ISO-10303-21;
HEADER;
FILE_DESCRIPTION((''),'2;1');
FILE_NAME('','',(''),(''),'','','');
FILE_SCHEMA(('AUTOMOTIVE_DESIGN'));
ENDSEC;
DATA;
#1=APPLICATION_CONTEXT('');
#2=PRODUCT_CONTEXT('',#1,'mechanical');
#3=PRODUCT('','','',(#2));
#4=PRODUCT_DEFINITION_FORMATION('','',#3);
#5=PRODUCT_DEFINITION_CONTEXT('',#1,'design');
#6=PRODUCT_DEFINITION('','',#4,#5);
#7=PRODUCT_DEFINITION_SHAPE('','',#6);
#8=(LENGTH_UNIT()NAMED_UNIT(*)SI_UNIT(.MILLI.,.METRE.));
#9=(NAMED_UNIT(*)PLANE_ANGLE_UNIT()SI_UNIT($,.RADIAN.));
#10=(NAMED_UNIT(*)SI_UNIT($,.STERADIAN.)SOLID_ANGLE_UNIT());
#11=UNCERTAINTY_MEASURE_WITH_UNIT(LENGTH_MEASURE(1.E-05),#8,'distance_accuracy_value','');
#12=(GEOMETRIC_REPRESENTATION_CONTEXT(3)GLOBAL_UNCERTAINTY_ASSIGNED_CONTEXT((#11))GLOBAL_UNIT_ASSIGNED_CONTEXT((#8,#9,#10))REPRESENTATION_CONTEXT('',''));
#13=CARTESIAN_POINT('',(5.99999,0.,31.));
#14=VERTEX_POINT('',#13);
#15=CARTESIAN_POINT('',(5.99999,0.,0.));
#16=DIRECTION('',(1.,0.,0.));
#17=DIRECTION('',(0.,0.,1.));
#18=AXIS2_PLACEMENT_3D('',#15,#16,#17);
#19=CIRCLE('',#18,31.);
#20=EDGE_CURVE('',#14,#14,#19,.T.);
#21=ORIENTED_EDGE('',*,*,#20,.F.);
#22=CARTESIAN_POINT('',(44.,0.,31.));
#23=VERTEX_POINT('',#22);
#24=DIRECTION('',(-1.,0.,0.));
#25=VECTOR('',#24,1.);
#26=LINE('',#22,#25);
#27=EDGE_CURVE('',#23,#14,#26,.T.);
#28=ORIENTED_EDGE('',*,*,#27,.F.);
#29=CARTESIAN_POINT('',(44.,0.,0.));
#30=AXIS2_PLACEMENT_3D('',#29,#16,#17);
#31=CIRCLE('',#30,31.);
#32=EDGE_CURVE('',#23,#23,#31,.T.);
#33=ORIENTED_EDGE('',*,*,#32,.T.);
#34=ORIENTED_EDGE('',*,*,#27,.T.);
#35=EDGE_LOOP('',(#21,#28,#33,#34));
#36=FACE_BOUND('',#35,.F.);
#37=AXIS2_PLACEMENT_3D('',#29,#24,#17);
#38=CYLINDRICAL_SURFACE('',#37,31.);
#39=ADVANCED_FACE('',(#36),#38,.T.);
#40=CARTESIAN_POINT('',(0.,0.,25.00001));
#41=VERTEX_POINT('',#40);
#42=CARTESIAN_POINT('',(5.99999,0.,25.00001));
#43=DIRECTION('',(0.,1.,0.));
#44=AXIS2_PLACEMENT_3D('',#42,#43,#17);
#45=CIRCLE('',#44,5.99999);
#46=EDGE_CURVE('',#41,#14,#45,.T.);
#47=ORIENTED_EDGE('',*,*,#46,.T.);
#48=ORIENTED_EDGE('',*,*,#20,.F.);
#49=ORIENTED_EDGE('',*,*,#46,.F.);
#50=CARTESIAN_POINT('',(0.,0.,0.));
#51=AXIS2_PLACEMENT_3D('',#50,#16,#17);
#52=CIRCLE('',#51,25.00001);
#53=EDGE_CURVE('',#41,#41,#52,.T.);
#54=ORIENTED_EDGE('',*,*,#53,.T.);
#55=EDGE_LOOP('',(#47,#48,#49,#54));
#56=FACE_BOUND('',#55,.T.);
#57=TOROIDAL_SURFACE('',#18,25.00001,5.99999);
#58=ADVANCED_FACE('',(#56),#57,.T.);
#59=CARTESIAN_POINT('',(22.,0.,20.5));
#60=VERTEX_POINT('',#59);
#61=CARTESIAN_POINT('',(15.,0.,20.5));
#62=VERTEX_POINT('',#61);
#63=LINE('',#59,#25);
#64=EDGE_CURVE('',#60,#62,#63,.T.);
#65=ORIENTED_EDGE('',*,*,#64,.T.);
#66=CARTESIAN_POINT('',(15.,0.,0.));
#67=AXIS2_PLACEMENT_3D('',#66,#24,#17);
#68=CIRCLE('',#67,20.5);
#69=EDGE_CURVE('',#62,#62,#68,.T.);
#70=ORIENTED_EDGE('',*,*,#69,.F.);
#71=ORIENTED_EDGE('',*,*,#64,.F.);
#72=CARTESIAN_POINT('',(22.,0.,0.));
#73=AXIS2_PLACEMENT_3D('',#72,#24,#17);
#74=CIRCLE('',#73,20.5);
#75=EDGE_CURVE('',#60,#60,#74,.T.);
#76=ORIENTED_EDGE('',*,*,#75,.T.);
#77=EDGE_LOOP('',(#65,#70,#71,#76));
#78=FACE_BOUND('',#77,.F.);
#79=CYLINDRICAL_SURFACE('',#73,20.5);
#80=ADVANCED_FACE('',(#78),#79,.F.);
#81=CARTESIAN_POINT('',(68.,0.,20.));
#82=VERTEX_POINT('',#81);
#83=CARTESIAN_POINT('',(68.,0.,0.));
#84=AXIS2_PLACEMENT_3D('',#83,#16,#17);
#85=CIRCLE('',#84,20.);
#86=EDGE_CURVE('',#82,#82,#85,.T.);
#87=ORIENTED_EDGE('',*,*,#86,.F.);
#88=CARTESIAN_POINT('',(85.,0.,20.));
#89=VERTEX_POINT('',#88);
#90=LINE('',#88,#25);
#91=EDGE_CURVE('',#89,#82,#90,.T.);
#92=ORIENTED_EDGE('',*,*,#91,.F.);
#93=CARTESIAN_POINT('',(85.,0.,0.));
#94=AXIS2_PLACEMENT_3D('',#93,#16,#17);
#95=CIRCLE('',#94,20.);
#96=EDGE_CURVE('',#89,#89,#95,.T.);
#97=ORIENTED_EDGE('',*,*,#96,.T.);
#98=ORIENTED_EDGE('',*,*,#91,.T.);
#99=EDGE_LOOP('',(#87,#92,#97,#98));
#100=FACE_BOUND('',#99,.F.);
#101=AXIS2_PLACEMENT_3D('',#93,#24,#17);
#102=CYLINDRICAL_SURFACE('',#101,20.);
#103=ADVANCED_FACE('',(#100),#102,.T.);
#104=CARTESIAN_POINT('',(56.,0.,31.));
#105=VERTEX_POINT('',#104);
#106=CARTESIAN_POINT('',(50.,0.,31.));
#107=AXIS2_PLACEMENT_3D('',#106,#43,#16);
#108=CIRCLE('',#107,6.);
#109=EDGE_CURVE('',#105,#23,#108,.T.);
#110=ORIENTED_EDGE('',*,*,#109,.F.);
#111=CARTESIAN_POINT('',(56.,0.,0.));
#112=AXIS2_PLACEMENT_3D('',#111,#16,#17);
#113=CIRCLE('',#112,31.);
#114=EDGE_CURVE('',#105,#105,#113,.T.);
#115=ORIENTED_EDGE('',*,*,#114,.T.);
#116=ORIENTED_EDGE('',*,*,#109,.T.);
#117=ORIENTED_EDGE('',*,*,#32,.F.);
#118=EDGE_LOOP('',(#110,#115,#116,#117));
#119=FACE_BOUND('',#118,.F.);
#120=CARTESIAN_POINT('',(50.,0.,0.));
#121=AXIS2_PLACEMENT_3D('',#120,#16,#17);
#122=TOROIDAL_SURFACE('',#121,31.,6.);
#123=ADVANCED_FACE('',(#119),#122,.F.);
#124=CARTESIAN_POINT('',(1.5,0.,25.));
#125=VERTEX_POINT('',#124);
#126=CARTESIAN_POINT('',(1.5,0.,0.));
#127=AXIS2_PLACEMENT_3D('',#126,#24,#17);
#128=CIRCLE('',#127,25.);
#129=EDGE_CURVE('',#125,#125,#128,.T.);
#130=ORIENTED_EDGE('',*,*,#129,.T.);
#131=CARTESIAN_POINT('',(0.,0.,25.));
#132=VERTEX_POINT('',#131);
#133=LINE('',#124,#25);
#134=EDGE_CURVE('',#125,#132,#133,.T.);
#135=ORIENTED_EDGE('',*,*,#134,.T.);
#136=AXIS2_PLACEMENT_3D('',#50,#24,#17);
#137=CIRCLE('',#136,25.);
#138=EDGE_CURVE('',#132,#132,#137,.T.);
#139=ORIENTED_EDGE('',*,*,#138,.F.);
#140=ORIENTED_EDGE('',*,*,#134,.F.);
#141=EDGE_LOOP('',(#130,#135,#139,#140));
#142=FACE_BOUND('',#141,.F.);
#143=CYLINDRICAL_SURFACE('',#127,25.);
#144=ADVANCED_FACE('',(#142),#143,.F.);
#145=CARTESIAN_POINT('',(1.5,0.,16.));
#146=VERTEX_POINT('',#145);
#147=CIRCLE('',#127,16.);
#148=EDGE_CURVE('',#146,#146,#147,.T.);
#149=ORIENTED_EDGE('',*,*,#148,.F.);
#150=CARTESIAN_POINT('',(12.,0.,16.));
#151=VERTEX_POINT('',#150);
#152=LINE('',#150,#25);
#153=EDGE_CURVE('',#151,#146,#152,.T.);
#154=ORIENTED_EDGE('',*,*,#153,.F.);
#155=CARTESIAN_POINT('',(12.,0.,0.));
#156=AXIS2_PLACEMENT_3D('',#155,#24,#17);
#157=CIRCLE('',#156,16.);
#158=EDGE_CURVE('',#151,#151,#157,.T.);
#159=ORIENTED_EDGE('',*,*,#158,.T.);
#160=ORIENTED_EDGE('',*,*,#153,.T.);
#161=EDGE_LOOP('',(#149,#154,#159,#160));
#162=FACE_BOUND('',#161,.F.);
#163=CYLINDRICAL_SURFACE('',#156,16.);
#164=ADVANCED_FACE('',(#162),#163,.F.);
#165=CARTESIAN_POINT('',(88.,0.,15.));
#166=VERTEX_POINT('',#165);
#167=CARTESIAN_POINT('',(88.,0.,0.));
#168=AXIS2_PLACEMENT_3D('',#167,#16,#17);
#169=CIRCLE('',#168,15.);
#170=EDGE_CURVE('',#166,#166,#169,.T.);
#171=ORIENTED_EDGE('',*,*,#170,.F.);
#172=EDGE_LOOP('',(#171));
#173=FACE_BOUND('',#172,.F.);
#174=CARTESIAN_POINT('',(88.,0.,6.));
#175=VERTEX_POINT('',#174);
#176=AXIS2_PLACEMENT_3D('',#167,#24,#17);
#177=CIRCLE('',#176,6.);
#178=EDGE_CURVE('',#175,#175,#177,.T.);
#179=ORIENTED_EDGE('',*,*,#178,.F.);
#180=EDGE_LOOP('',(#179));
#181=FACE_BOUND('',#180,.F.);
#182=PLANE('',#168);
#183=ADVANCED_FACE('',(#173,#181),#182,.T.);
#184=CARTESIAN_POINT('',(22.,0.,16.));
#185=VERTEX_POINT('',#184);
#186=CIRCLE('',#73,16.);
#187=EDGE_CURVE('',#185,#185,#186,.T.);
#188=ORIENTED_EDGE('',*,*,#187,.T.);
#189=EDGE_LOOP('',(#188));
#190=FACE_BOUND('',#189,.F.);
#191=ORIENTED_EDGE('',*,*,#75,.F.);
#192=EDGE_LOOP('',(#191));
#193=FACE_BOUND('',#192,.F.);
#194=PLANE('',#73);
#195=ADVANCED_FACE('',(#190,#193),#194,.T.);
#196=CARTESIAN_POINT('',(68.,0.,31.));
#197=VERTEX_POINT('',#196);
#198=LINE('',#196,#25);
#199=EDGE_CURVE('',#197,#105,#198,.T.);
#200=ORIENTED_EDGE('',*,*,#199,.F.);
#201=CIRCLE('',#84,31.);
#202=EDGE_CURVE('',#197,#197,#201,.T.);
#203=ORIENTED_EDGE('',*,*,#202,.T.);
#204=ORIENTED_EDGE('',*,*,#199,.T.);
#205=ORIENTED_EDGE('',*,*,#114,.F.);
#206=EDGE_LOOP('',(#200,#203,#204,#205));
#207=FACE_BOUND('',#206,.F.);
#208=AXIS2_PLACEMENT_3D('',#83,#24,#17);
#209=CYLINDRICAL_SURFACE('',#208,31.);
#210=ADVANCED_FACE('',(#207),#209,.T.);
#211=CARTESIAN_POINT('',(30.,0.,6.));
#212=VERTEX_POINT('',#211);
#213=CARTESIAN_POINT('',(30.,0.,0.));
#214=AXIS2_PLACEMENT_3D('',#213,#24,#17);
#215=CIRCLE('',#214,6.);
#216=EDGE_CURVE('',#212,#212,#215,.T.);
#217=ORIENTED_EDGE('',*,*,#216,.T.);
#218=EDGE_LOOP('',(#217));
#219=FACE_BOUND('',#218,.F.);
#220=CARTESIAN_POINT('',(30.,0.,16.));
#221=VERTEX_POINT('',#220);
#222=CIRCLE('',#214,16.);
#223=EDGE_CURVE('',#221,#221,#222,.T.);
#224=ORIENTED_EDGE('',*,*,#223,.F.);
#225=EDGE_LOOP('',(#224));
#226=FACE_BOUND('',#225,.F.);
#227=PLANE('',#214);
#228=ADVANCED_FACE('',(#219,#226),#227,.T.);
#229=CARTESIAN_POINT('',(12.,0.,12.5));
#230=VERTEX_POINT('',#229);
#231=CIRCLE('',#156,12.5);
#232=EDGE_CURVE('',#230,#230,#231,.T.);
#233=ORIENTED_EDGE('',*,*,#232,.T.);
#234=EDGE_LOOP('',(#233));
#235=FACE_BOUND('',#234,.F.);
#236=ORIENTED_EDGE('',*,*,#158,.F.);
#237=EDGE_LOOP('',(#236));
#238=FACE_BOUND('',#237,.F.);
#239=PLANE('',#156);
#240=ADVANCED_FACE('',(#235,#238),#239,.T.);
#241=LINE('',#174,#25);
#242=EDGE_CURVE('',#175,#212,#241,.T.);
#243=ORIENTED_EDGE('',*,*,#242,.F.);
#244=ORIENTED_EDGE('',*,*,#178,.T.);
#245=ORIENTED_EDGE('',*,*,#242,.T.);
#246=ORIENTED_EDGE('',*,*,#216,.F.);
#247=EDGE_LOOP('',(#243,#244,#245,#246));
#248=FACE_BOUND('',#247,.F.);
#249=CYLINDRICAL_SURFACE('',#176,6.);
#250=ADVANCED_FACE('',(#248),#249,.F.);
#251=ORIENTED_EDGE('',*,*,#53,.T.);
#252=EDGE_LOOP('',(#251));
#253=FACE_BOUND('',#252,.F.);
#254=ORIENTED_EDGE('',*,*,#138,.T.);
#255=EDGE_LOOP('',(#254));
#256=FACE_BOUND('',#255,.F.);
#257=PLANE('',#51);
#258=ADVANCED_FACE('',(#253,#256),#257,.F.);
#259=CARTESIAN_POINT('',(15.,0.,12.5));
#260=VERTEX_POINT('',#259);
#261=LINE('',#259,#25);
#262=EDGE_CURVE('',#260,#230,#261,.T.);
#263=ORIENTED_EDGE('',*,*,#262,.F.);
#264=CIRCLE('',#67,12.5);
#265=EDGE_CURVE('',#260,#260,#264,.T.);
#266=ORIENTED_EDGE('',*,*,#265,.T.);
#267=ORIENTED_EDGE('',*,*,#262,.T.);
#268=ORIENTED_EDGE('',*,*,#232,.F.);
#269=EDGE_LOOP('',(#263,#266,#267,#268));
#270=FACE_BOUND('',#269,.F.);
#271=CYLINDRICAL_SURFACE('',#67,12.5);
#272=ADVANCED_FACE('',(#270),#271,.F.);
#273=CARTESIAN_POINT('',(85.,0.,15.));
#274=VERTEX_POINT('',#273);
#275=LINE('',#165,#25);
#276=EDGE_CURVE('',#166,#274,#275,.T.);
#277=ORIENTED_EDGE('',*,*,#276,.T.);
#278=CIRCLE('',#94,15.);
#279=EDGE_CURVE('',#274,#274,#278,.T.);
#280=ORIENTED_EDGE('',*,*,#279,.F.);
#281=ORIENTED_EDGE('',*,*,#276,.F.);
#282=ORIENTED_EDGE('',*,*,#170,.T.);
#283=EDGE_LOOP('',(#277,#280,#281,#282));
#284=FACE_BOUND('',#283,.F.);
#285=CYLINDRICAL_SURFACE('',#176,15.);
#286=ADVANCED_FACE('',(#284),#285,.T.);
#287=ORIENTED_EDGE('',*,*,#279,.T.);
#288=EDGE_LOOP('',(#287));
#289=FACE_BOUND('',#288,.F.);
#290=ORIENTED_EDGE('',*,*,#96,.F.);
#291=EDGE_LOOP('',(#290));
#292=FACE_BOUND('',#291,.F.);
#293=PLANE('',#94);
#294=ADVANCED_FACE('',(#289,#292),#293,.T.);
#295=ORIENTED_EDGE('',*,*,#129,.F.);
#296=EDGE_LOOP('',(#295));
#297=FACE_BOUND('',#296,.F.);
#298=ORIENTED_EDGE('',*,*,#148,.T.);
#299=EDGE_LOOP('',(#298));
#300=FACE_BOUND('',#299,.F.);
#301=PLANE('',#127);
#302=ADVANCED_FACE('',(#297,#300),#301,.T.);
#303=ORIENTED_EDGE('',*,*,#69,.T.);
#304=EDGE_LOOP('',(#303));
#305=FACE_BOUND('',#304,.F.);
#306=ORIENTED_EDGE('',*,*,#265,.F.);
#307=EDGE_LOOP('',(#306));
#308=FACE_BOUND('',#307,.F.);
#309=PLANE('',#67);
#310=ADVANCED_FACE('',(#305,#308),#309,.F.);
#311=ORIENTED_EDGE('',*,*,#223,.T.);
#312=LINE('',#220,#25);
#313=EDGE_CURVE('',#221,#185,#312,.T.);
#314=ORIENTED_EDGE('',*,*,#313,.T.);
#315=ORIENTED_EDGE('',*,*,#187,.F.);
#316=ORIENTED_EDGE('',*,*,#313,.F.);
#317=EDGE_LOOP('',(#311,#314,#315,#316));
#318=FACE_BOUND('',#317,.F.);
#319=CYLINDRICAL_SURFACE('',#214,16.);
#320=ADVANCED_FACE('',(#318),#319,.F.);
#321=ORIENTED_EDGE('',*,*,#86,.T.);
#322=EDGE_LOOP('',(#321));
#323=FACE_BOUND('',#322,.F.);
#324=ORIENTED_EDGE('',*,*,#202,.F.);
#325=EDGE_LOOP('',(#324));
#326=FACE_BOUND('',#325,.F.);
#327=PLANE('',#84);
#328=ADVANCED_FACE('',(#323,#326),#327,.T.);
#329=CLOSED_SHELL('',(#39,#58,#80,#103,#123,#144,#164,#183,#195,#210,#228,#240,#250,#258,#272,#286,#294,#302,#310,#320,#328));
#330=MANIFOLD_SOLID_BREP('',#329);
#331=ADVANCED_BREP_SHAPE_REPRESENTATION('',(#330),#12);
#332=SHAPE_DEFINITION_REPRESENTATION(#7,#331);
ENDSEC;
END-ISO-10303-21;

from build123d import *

# Parameters (mm, degrees)
F4_R = 5.99999


# Not quite as in the source:
# - a fillet or chamfer is up to 0.001 mm smaller than in the source, because OpenCascade refuses the exact size


with BuildPart() as f1:
    # F0 (on Front) → F1 (revolve)
    with BuildSketch(Plane.XZ):
        with BuildLine():
            Line((0, 31), (0, 0))
            Line((0, 0), (88, 0))
            Line((88, 0), (88, 15))
            Line((88, 15), (85, 15))
            Line((85, 15), (85, 20))
            Line((85, 20), (68, 20))
            Line((68, 20), (68, 31))
            Line((68, 31), (56, 31))
            ThreePointArc((56, 31), (50, 25), (44, 31))
            Line((44, 31), (0, 31))
        make_face()
    revolve(axis=Axis((57.4120017065, 0, 0), (1, 0, 0)))

    # F2 (on Front) → F3 (revolve, cut)
    with BuildSketch(Plane.XZ):
        Polygon((0, 25), (0, 0), (88, 0), (88, 6), (30, 6), (30, 16), (22, 16), (22, 20.5), (15, 20.5), (15, 12.5), (12, 12.5), (12, 16), (1.5, 16), (1.5, 25), align=None)
    revolve(axis=Axis((-12.9248626642, 0, 0), (-1, 0, 0)), mode=Mode.SUBTRACT)

    # F4 (radius 6 in the source; OpenCascade refuses exactly that, so slightly less here)
    f4_edges = [f1.edges().sort_by_distance(p)[0] for p in [
        (0, 0, -31),
    ]]
    fillet(f4_edges, radius=F4_R)


solid = f1.part
